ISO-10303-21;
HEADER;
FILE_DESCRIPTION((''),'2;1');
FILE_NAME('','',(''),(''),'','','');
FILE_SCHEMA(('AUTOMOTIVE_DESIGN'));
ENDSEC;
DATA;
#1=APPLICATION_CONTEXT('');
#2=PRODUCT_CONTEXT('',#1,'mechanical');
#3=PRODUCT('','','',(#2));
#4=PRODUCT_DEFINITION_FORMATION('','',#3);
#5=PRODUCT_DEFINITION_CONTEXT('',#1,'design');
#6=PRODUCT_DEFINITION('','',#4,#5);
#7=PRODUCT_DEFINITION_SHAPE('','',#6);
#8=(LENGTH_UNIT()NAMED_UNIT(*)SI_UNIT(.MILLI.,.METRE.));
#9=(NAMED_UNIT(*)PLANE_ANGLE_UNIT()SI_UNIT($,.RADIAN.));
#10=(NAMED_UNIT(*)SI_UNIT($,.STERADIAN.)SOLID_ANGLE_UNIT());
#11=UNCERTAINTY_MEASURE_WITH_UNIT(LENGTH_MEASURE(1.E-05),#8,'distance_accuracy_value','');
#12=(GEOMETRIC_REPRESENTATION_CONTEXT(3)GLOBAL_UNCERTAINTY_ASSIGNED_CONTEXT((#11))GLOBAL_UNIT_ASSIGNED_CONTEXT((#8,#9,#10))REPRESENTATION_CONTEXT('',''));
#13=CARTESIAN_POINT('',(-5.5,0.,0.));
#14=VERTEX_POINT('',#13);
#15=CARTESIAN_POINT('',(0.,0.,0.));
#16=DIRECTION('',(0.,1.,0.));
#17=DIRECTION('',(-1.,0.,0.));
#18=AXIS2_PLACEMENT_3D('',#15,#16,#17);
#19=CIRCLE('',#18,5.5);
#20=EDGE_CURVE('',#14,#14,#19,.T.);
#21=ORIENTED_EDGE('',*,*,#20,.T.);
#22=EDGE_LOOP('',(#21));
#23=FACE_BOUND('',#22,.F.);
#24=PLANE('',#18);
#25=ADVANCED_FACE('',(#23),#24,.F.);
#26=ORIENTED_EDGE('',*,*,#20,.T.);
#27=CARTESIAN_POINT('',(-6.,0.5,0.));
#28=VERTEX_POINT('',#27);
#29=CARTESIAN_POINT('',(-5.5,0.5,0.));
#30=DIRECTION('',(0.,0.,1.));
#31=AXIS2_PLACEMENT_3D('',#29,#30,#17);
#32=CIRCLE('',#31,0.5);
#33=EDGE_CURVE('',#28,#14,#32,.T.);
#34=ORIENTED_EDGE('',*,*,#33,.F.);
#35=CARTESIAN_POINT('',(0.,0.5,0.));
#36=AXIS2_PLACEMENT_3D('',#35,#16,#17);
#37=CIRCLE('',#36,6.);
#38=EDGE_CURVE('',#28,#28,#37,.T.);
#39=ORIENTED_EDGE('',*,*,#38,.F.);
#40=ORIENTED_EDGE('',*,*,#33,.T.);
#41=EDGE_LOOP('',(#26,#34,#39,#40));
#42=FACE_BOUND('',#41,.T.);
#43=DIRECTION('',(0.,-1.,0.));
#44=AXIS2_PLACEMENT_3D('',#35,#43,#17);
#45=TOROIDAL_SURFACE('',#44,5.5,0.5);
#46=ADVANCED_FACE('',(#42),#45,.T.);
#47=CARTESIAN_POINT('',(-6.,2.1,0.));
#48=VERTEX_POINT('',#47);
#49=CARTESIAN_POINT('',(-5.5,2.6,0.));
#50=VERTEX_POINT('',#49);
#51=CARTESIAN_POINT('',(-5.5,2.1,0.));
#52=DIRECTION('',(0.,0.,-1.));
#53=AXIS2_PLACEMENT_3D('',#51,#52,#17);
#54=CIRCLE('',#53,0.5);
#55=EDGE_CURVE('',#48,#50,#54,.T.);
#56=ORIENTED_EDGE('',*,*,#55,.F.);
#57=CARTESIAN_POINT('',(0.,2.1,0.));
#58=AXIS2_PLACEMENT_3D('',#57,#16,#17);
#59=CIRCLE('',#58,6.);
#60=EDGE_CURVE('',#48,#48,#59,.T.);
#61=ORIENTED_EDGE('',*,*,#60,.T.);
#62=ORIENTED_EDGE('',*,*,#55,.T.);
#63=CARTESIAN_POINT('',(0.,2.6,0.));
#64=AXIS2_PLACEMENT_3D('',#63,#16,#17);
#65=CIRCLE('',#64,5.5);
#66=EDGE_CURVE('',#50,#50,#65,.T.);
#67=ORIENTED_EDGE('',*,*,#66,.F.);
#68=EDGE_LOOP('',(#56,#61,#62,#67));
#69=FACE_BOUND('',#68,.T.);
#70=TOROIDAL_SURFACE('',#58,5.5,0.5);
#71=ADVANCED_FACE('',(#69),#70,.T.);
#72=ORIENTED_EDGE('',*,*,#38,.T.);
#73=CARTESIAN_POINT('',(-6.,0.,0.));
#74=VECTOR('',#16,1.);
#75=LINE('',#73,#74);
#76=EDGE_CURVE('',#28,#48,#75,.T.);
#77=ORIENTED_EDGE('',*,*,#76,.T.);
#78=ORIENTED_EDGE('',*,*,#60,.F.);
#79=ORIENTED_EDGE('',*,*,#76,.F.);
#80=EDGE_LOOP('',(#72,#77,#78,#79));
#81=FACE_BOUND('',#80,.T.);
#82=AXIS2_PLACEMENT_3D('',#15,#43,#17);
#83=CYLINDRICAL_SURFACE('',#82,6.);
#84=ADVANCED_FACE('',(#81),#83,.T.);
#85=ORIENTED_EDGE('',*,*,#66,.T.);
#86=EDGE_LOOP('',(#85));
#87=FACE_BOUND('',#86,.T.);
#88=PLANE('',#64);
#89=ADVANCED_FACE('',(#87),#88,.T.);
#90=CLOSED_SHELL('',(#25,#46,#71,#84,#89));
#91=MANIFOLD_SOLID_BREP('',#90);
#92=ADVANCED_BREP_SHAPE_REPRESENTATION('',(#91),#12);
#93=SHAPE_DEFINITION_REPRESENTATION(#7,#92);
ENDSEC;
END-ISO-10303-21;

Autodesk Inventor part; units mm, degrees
ref_plane "YZ Plane" through (0, 0, 0) normal (1, 0, 0) x (0, 1, 0)
ref_plane "XZ Plane" through (0, 0, 0) normal (0, 1, 0) x (-1, 0, 0)
ref_plane "XY Plane" through (0, 0, 0) normal (0, 0, 1) x (1, 0, 0)
sketch "Skizze1" plane through (0, 0, 0) normal (0, 1, 0) x (-1, 0, 0)
  circle A0 centre (0, 0) radius 6
  dimension "d1" = 12
extrude "Extrusion1" add sketch "Skizze1" along normal blind 2.6
fillet "Rundung1" radius 0.5 2 edges at (6, 2.6, 0) (6, 0, 0)
properties part number "04-02-02-020_Magnet" material "Edelstahl"
